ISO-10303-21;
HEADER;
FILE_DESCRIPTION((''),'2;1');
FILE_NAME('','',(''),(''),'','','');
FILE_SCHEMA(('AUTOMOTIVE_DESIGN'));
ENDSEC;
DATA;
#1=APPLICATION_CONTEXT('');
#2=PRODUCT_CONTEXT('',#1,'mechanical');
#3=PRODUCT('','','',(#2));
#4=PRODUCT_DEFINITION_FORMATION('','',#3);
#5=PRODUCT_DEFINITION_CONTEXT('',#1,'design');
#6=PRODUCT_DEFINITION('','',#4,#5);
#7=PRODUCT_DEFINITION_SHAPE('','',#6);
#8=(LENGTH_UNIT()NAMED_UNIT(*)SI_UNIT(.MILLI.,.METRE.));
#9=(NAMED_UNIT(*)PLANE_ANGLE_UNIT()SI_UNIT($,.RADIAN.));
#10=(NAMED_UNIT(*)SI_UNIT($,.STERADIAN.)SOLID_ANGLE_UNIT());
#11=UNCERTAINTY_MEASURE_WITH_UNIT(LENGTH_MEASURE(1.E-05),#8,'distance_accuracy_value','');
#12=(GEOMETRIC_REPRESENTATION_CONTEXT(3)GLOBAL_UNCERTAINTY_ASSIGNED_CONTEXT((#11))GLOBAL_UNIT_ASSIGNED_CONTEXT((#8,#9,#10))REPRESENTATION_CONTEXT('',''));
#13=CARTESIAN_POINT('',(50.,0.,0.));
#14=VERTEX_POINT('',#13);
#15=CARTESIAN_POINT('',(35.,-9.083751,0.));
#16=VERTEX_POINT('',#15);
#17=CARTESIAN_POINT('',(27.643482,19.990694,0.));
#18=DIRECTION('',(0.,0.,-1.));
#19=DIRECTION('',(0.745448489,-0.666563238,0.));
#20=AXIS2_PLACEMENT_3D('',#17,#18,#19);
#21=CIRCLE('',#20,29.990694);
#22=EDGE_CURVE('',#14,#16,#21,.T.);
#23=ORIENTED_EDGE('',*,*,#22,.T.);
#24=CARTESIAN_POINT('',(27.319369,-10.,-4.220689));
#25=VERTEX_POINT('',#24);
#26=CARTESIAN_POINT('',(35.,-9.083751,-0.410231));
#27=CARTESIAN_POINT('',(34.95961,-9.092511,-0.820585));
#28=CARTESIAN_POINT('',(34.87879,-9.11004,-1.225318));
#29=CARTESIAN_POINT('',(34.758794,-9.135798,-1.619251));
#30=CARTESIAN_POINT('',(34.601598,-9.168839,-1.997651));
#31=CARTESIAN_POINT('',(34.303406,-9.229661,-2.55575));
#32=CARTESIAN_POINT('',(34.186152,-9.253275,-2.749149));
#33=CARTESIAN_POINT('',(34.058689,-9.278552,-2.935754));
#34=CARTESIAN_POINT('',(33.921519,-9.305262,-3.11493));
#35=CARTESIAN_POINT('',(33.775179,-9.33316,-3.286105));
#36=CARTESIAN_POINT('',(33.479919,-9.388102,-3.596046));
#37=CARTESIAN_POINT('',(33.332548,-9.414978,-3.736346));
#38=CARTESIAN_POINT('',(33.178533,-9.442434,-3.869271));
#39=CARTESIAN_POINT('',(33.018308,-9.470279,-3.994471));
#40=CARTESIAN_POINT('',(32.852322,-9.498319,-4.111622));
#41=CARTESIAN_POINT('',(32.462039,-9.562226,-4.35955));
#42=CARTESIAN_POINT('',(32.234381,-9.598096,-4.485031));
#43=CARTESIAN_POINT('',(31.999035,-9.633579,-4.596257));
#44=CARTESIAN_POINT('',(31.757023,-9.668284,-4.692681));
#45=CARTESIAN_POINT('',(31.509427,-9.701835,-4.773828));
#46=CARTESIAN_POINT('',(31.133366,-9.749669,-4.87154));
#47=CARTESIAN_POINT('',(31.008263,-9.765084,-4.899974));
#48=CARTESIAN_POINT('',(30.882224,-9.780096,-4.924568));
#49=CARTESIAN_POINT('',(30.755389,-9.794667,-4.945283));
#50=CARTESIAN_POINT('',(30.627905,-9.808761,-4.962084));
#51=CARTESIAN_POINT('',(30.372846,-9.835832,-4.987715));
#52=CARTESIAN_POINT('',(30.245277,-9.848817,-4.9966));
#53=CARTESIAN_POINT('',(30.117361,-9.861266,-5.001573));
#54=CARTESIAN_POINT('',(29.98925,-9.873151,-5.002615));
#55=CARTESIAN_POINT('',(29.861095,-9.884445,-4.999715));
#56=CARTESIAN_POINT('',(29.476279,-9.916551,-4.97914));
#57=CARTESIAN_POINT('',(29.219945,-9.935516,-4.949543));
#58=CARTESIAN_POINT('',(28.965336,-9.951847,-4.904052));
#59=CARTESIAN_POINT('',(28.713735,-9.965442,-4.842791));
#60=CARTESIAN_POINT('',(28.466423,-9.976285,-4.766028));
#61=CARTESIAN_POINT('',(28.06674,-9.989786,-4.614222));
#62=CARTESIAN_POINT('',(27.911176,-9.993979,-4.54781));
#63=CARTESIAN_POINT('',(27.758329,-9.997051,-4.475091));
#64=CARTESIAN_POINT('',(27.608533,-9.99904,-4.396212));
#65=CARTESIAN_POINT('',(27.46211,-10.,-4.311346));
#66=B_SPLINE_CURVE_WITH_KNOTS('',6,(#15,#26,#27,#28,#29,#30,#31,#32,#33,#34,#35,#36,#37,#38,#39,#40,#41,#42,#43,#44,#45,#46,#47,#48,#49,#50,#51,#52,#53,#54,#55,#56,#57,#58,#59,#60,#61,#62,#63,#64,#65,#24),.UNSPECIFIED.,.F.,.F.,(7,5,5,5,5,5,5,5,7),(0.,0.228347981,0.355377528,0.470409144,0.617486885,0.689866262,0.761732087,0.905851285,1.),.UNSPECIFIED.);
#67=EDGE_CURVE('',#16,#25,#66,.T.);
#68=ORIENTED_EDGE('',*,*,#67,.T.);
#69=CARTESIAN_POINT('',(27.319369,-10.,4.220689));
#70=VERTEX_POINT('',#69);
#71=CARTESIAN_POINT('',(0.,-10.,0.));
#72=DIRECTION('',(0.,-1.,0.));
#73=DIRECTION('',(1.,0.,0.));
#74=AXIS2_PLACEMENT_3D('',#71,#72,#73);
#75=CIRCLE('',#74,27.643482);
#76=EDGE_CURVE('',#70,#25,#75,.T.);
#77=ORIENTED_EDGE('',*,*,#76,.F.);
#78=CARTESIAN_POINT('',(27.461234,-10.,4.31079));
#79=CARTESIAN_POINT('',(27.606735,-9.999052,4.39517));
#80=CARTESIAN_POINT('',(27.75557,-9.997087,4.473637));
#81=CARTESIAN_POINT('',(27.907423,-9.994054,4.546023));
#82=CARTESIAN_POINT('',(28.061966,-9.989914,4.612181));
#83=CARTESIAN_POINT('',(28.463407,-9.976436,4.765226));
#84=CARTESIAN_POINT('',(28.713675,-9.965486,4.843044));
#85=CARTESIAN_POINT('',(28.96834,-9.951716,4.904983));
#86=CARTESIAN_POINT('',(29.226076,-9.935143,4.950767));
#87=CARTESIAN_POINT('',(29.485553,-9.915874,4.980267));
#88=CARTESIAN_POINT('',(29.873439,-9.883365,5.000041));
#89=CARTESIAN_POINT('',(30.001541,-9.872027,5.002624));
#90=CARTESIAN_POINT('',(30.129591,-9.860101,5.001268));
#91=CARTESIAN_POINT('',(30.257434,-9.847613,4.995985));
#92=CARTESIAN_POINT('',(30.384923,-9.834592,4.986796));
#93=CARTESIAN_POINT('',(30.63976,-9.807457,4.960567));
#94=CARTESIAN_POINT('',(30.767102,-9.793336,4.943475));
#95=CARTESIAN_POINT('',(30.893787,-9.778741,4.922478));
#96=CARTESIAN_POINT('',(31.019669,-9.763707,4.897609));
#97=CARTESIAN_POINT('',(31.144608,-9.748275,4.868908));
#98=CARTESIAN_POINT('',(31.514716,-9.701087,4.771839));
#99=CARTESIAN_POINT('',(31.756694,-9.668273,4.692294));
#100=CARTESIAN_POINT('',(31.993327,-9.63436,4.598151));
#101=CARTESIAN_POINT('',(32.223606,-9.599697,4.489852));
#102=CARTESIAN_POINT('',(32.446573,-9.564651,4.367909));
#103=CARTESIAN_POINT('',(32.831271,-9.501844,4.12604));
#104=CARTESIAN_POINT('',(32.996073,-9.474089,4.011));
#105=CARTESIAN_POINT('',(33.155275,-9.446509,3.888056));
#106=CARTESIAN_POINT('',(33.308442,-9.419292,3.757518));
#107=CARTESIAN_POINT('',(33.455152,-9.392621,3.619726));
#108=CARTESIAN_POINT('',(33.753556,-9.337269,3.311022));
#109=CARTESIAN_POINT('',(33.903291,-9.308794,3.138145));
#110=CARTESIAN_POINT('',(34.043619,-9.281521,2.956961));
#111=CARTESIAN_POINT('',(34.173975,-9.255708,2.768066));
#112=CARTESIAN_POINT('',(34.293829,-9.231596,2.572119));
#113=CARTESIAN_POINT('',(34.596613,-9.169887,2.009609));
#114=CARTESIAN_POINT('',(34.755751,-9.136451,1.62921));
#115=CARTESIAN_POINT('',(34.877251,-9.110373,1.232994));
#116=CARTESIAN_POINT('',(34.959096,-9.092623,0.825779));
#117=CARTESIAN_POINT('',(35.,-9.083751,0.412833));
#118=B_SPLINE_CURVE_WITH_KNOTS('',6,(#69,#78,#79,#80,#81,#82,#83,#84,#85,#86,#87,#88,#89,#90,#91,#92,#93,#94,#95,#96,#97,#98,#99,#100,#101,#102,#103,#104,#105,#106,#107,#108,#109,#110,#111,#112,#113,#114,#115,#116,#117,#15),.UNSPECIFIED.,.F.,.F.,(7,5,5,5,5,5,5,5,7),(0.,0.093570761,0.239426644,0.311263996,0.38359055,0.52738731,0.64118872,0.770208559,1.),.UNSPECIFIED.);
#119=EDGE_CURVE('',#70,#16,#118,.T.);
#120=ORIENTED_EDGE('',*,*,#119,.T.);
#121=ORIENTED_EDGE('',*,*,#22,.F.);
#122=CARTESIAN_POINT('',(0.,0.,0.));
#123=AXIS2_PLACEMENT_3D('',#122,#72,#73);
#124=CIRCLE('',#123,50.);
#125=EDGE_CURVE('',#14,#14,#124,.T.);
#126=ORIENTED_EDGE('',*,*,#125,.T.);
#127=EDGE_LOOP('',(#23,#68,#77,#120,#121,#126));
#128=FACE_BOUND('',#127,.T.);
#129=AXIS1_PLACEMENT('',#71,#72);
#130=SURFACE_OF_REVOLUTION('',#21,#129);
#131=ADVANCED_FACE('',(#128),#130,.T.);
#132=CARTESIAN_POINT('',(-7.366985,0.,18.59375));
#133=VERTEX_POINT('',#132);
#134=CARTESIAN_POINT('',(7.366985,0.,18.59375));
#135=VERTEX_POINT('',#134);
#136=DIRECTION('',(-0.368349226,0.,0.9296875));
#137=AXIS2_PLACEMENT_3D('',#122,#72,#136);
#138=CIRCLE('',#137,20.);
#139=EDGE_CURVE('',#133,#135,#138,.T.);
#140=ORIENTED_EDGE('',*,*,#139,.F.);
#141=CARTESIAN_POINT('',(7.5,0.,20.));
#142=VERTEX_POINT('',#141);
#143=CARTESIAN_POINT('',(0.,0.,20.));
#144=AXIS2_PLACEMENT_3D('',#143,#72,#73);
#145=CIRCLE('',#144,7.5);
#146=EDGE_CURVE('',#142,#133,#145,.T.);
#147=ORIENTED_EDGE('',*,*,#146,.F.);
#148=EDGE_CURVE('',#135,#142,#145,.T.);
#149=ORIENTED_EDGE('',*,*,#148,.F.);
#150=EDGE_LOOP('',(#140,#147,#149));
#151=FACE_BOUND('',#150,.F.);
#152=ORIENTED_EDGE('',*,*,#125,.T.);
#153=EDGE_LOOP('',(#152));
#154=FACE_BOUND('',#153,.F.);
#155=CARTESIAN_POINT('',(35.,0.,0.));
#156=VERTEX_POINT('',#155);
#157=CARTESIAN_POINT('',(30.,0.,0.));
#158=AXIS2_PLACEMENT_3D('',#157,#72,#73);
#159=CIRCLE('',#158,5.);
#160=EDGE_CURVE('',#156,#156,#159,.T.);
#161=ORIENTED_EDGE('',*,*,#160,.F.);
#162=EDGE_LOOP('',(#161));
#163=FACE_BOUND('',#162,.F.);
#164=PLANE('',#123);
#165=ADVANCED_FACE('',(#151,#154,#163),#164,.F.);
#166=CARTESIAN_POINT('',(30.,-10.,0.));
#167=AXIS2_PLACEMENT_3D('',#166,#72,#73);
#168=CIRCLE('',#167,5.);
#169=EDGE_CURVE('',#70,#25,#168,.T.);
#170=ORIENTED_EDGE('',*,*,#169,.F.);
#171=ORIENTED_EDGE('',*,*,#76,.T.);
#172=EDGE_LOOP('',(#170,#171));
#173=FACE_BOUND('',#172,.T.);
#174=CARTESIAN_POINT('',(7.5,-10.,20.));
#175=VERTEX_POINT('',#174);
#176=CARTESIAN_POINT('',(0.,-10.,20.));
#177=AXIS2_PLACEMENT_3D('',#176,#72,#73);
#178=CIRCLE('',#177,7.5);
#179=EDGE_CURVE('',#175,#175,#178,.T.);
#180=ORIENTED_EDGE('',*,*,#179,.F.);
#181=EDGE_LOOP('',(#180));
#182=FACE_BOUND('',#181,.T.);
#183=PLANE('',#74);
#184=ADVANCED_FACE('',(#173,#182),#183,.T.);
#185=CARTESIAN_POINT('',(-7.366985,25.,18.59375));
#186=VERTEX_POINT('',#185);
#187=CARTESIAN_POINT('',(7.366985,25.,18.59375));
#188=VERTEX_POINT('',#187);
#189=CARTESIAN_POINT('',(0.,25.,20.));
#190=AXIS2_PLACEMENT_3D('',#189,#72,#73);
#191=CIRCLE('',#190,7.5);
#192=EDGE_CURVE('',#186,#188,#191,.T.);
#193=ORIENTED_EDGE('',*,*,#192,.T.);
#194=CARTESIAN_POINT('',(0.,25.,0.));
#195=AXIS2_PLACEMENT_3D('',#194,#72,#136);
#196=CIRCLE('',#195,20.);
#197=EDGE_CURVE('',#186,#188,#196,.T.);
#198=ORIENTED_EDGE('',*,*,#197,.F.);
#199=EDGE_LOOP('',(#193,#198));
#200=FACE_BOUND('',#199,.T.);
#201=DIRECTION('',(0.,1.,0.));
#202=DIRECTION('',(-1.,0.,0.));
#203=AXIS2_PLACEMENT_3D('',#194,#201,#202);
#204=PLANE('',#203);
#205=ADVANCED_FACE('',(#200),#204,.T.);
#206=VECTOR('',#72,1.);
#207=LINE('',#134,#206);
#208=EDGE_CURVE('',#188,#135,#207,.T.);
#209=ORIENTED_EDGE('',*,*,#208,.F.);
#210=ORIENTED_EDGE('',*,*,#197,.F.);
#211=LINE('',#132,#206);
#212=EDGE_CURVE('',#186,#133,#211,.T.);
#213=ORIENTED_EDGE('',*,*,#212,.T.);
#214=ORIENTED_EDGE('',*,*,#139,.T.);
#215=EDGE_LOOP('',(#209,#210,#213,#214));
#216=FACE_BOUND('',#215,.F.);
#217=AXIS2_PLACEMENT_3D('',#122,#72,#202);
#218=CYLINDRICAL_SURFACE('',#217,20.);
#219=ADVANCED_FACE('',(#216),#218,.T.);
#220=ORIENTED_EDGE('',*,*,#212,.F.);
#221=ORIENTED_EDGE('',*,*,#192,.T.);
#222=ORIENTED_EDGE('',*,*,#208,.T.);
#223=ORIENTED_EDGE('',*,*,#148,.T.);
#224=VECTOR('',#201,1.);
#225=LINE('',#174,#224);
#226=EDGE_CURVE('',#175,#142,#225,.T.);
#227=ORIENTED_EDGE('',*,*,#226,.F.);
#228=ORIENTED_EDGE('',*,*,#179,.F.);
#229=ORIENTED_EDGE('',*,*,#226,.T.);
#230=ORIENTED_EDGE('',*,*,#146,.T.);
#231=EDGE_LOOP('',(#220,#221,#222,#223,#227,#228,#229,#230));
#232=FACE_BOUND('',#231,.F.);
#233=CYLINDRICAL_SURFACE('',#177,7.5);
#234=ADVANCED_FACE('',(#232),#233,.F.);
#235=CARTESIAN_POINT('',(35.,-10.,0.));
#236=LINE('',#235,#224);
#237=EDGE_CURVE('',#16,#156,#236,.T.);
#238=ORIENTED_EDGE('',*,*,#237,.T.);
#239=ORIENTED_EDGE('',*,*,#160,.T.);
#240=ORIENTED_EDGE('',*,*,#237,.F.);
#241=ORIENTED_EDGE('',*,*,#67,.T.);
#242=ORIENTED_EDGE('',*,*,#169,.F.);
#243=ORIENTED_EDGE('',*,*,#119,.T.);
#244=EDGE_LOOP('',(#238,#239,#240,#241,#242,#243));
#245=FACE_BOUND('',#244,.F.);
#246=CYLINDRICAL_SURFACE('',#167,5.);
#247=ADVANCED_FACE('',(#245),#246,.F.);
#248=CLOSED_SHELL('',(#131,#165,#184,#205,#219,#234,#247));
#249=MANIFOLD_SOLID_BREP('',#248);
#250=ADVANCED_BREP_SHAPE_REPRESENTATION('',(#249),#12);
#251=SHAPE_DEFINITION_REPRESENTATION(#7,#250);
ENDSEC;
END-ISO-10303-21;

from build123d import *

# Parameters (mm, degrees)
F0_R     = 50
F1_DEPTH = 10
F2_R     = 20
F3_DEPTH = 25
F5_R     = 5
F6_DEPTH = 85.6401380152
F7_R     = 7.5
F8_DEPTH = 57.2151485831


# Not quite as in the source:
# - a fillet or chamfer that OpenCascade refuses, or shapes differently, is made with other operations: its cross-section is extruded or revolved along the edge and cut away or added


with BuildPart() as f1:
    # F0 (on Front) → F1 (new body)
    with BuildSketch(Plane.XZ):
        Circle(F0_R)
    extrude(amount=F1_DEPTH)

    # F2 (on face) → F3 (join)
    with BuildSketch(Plane(origin=(0, 0, 0), x_dir=(-1, 0, 0), z_dir=(0, 1, 0))):
        Circle(F2_R)
    extrude(amount=F3_DEPTH)

    # F5 (on offset) → F6 (cut)
    with BuildSketch(Plane.XZ.offset(10)):
        with Locations((30, 0)):
            Circle(F5_R)
    extrude(amount=-F6_DEPTH, mode=Mode.SUBTRACT)

    # F7 (on face) → F8 (cut)
    with BuildSketch(Plane.XZ.offset(10)):
        with Locations((0, 20)):
            Circle(F7_R)
    extrude(amount=-F8_DEPTH, mode=Mode.SUBTRACT)

    # F9: fillet of radius 29.9906943199 on 1 edges, made by hand

    # F9_s1 → F9_t2 (revolve, cut)
    with BuildSketch(Plane.XY):
        with BuildLine():
            ThreePointArc((50, 0), (39.8890312916, -7.3860891689), (27.643482239, -10))
            Line((27.643482239, -10), (50, -10))
            Line((50, -10), (50, 0))
        make_face()
    revolve(axis=Axis((0, -10, 0), (0, -1, 0)), mode=Mode.SUBTRACT)


solid = f1.part
